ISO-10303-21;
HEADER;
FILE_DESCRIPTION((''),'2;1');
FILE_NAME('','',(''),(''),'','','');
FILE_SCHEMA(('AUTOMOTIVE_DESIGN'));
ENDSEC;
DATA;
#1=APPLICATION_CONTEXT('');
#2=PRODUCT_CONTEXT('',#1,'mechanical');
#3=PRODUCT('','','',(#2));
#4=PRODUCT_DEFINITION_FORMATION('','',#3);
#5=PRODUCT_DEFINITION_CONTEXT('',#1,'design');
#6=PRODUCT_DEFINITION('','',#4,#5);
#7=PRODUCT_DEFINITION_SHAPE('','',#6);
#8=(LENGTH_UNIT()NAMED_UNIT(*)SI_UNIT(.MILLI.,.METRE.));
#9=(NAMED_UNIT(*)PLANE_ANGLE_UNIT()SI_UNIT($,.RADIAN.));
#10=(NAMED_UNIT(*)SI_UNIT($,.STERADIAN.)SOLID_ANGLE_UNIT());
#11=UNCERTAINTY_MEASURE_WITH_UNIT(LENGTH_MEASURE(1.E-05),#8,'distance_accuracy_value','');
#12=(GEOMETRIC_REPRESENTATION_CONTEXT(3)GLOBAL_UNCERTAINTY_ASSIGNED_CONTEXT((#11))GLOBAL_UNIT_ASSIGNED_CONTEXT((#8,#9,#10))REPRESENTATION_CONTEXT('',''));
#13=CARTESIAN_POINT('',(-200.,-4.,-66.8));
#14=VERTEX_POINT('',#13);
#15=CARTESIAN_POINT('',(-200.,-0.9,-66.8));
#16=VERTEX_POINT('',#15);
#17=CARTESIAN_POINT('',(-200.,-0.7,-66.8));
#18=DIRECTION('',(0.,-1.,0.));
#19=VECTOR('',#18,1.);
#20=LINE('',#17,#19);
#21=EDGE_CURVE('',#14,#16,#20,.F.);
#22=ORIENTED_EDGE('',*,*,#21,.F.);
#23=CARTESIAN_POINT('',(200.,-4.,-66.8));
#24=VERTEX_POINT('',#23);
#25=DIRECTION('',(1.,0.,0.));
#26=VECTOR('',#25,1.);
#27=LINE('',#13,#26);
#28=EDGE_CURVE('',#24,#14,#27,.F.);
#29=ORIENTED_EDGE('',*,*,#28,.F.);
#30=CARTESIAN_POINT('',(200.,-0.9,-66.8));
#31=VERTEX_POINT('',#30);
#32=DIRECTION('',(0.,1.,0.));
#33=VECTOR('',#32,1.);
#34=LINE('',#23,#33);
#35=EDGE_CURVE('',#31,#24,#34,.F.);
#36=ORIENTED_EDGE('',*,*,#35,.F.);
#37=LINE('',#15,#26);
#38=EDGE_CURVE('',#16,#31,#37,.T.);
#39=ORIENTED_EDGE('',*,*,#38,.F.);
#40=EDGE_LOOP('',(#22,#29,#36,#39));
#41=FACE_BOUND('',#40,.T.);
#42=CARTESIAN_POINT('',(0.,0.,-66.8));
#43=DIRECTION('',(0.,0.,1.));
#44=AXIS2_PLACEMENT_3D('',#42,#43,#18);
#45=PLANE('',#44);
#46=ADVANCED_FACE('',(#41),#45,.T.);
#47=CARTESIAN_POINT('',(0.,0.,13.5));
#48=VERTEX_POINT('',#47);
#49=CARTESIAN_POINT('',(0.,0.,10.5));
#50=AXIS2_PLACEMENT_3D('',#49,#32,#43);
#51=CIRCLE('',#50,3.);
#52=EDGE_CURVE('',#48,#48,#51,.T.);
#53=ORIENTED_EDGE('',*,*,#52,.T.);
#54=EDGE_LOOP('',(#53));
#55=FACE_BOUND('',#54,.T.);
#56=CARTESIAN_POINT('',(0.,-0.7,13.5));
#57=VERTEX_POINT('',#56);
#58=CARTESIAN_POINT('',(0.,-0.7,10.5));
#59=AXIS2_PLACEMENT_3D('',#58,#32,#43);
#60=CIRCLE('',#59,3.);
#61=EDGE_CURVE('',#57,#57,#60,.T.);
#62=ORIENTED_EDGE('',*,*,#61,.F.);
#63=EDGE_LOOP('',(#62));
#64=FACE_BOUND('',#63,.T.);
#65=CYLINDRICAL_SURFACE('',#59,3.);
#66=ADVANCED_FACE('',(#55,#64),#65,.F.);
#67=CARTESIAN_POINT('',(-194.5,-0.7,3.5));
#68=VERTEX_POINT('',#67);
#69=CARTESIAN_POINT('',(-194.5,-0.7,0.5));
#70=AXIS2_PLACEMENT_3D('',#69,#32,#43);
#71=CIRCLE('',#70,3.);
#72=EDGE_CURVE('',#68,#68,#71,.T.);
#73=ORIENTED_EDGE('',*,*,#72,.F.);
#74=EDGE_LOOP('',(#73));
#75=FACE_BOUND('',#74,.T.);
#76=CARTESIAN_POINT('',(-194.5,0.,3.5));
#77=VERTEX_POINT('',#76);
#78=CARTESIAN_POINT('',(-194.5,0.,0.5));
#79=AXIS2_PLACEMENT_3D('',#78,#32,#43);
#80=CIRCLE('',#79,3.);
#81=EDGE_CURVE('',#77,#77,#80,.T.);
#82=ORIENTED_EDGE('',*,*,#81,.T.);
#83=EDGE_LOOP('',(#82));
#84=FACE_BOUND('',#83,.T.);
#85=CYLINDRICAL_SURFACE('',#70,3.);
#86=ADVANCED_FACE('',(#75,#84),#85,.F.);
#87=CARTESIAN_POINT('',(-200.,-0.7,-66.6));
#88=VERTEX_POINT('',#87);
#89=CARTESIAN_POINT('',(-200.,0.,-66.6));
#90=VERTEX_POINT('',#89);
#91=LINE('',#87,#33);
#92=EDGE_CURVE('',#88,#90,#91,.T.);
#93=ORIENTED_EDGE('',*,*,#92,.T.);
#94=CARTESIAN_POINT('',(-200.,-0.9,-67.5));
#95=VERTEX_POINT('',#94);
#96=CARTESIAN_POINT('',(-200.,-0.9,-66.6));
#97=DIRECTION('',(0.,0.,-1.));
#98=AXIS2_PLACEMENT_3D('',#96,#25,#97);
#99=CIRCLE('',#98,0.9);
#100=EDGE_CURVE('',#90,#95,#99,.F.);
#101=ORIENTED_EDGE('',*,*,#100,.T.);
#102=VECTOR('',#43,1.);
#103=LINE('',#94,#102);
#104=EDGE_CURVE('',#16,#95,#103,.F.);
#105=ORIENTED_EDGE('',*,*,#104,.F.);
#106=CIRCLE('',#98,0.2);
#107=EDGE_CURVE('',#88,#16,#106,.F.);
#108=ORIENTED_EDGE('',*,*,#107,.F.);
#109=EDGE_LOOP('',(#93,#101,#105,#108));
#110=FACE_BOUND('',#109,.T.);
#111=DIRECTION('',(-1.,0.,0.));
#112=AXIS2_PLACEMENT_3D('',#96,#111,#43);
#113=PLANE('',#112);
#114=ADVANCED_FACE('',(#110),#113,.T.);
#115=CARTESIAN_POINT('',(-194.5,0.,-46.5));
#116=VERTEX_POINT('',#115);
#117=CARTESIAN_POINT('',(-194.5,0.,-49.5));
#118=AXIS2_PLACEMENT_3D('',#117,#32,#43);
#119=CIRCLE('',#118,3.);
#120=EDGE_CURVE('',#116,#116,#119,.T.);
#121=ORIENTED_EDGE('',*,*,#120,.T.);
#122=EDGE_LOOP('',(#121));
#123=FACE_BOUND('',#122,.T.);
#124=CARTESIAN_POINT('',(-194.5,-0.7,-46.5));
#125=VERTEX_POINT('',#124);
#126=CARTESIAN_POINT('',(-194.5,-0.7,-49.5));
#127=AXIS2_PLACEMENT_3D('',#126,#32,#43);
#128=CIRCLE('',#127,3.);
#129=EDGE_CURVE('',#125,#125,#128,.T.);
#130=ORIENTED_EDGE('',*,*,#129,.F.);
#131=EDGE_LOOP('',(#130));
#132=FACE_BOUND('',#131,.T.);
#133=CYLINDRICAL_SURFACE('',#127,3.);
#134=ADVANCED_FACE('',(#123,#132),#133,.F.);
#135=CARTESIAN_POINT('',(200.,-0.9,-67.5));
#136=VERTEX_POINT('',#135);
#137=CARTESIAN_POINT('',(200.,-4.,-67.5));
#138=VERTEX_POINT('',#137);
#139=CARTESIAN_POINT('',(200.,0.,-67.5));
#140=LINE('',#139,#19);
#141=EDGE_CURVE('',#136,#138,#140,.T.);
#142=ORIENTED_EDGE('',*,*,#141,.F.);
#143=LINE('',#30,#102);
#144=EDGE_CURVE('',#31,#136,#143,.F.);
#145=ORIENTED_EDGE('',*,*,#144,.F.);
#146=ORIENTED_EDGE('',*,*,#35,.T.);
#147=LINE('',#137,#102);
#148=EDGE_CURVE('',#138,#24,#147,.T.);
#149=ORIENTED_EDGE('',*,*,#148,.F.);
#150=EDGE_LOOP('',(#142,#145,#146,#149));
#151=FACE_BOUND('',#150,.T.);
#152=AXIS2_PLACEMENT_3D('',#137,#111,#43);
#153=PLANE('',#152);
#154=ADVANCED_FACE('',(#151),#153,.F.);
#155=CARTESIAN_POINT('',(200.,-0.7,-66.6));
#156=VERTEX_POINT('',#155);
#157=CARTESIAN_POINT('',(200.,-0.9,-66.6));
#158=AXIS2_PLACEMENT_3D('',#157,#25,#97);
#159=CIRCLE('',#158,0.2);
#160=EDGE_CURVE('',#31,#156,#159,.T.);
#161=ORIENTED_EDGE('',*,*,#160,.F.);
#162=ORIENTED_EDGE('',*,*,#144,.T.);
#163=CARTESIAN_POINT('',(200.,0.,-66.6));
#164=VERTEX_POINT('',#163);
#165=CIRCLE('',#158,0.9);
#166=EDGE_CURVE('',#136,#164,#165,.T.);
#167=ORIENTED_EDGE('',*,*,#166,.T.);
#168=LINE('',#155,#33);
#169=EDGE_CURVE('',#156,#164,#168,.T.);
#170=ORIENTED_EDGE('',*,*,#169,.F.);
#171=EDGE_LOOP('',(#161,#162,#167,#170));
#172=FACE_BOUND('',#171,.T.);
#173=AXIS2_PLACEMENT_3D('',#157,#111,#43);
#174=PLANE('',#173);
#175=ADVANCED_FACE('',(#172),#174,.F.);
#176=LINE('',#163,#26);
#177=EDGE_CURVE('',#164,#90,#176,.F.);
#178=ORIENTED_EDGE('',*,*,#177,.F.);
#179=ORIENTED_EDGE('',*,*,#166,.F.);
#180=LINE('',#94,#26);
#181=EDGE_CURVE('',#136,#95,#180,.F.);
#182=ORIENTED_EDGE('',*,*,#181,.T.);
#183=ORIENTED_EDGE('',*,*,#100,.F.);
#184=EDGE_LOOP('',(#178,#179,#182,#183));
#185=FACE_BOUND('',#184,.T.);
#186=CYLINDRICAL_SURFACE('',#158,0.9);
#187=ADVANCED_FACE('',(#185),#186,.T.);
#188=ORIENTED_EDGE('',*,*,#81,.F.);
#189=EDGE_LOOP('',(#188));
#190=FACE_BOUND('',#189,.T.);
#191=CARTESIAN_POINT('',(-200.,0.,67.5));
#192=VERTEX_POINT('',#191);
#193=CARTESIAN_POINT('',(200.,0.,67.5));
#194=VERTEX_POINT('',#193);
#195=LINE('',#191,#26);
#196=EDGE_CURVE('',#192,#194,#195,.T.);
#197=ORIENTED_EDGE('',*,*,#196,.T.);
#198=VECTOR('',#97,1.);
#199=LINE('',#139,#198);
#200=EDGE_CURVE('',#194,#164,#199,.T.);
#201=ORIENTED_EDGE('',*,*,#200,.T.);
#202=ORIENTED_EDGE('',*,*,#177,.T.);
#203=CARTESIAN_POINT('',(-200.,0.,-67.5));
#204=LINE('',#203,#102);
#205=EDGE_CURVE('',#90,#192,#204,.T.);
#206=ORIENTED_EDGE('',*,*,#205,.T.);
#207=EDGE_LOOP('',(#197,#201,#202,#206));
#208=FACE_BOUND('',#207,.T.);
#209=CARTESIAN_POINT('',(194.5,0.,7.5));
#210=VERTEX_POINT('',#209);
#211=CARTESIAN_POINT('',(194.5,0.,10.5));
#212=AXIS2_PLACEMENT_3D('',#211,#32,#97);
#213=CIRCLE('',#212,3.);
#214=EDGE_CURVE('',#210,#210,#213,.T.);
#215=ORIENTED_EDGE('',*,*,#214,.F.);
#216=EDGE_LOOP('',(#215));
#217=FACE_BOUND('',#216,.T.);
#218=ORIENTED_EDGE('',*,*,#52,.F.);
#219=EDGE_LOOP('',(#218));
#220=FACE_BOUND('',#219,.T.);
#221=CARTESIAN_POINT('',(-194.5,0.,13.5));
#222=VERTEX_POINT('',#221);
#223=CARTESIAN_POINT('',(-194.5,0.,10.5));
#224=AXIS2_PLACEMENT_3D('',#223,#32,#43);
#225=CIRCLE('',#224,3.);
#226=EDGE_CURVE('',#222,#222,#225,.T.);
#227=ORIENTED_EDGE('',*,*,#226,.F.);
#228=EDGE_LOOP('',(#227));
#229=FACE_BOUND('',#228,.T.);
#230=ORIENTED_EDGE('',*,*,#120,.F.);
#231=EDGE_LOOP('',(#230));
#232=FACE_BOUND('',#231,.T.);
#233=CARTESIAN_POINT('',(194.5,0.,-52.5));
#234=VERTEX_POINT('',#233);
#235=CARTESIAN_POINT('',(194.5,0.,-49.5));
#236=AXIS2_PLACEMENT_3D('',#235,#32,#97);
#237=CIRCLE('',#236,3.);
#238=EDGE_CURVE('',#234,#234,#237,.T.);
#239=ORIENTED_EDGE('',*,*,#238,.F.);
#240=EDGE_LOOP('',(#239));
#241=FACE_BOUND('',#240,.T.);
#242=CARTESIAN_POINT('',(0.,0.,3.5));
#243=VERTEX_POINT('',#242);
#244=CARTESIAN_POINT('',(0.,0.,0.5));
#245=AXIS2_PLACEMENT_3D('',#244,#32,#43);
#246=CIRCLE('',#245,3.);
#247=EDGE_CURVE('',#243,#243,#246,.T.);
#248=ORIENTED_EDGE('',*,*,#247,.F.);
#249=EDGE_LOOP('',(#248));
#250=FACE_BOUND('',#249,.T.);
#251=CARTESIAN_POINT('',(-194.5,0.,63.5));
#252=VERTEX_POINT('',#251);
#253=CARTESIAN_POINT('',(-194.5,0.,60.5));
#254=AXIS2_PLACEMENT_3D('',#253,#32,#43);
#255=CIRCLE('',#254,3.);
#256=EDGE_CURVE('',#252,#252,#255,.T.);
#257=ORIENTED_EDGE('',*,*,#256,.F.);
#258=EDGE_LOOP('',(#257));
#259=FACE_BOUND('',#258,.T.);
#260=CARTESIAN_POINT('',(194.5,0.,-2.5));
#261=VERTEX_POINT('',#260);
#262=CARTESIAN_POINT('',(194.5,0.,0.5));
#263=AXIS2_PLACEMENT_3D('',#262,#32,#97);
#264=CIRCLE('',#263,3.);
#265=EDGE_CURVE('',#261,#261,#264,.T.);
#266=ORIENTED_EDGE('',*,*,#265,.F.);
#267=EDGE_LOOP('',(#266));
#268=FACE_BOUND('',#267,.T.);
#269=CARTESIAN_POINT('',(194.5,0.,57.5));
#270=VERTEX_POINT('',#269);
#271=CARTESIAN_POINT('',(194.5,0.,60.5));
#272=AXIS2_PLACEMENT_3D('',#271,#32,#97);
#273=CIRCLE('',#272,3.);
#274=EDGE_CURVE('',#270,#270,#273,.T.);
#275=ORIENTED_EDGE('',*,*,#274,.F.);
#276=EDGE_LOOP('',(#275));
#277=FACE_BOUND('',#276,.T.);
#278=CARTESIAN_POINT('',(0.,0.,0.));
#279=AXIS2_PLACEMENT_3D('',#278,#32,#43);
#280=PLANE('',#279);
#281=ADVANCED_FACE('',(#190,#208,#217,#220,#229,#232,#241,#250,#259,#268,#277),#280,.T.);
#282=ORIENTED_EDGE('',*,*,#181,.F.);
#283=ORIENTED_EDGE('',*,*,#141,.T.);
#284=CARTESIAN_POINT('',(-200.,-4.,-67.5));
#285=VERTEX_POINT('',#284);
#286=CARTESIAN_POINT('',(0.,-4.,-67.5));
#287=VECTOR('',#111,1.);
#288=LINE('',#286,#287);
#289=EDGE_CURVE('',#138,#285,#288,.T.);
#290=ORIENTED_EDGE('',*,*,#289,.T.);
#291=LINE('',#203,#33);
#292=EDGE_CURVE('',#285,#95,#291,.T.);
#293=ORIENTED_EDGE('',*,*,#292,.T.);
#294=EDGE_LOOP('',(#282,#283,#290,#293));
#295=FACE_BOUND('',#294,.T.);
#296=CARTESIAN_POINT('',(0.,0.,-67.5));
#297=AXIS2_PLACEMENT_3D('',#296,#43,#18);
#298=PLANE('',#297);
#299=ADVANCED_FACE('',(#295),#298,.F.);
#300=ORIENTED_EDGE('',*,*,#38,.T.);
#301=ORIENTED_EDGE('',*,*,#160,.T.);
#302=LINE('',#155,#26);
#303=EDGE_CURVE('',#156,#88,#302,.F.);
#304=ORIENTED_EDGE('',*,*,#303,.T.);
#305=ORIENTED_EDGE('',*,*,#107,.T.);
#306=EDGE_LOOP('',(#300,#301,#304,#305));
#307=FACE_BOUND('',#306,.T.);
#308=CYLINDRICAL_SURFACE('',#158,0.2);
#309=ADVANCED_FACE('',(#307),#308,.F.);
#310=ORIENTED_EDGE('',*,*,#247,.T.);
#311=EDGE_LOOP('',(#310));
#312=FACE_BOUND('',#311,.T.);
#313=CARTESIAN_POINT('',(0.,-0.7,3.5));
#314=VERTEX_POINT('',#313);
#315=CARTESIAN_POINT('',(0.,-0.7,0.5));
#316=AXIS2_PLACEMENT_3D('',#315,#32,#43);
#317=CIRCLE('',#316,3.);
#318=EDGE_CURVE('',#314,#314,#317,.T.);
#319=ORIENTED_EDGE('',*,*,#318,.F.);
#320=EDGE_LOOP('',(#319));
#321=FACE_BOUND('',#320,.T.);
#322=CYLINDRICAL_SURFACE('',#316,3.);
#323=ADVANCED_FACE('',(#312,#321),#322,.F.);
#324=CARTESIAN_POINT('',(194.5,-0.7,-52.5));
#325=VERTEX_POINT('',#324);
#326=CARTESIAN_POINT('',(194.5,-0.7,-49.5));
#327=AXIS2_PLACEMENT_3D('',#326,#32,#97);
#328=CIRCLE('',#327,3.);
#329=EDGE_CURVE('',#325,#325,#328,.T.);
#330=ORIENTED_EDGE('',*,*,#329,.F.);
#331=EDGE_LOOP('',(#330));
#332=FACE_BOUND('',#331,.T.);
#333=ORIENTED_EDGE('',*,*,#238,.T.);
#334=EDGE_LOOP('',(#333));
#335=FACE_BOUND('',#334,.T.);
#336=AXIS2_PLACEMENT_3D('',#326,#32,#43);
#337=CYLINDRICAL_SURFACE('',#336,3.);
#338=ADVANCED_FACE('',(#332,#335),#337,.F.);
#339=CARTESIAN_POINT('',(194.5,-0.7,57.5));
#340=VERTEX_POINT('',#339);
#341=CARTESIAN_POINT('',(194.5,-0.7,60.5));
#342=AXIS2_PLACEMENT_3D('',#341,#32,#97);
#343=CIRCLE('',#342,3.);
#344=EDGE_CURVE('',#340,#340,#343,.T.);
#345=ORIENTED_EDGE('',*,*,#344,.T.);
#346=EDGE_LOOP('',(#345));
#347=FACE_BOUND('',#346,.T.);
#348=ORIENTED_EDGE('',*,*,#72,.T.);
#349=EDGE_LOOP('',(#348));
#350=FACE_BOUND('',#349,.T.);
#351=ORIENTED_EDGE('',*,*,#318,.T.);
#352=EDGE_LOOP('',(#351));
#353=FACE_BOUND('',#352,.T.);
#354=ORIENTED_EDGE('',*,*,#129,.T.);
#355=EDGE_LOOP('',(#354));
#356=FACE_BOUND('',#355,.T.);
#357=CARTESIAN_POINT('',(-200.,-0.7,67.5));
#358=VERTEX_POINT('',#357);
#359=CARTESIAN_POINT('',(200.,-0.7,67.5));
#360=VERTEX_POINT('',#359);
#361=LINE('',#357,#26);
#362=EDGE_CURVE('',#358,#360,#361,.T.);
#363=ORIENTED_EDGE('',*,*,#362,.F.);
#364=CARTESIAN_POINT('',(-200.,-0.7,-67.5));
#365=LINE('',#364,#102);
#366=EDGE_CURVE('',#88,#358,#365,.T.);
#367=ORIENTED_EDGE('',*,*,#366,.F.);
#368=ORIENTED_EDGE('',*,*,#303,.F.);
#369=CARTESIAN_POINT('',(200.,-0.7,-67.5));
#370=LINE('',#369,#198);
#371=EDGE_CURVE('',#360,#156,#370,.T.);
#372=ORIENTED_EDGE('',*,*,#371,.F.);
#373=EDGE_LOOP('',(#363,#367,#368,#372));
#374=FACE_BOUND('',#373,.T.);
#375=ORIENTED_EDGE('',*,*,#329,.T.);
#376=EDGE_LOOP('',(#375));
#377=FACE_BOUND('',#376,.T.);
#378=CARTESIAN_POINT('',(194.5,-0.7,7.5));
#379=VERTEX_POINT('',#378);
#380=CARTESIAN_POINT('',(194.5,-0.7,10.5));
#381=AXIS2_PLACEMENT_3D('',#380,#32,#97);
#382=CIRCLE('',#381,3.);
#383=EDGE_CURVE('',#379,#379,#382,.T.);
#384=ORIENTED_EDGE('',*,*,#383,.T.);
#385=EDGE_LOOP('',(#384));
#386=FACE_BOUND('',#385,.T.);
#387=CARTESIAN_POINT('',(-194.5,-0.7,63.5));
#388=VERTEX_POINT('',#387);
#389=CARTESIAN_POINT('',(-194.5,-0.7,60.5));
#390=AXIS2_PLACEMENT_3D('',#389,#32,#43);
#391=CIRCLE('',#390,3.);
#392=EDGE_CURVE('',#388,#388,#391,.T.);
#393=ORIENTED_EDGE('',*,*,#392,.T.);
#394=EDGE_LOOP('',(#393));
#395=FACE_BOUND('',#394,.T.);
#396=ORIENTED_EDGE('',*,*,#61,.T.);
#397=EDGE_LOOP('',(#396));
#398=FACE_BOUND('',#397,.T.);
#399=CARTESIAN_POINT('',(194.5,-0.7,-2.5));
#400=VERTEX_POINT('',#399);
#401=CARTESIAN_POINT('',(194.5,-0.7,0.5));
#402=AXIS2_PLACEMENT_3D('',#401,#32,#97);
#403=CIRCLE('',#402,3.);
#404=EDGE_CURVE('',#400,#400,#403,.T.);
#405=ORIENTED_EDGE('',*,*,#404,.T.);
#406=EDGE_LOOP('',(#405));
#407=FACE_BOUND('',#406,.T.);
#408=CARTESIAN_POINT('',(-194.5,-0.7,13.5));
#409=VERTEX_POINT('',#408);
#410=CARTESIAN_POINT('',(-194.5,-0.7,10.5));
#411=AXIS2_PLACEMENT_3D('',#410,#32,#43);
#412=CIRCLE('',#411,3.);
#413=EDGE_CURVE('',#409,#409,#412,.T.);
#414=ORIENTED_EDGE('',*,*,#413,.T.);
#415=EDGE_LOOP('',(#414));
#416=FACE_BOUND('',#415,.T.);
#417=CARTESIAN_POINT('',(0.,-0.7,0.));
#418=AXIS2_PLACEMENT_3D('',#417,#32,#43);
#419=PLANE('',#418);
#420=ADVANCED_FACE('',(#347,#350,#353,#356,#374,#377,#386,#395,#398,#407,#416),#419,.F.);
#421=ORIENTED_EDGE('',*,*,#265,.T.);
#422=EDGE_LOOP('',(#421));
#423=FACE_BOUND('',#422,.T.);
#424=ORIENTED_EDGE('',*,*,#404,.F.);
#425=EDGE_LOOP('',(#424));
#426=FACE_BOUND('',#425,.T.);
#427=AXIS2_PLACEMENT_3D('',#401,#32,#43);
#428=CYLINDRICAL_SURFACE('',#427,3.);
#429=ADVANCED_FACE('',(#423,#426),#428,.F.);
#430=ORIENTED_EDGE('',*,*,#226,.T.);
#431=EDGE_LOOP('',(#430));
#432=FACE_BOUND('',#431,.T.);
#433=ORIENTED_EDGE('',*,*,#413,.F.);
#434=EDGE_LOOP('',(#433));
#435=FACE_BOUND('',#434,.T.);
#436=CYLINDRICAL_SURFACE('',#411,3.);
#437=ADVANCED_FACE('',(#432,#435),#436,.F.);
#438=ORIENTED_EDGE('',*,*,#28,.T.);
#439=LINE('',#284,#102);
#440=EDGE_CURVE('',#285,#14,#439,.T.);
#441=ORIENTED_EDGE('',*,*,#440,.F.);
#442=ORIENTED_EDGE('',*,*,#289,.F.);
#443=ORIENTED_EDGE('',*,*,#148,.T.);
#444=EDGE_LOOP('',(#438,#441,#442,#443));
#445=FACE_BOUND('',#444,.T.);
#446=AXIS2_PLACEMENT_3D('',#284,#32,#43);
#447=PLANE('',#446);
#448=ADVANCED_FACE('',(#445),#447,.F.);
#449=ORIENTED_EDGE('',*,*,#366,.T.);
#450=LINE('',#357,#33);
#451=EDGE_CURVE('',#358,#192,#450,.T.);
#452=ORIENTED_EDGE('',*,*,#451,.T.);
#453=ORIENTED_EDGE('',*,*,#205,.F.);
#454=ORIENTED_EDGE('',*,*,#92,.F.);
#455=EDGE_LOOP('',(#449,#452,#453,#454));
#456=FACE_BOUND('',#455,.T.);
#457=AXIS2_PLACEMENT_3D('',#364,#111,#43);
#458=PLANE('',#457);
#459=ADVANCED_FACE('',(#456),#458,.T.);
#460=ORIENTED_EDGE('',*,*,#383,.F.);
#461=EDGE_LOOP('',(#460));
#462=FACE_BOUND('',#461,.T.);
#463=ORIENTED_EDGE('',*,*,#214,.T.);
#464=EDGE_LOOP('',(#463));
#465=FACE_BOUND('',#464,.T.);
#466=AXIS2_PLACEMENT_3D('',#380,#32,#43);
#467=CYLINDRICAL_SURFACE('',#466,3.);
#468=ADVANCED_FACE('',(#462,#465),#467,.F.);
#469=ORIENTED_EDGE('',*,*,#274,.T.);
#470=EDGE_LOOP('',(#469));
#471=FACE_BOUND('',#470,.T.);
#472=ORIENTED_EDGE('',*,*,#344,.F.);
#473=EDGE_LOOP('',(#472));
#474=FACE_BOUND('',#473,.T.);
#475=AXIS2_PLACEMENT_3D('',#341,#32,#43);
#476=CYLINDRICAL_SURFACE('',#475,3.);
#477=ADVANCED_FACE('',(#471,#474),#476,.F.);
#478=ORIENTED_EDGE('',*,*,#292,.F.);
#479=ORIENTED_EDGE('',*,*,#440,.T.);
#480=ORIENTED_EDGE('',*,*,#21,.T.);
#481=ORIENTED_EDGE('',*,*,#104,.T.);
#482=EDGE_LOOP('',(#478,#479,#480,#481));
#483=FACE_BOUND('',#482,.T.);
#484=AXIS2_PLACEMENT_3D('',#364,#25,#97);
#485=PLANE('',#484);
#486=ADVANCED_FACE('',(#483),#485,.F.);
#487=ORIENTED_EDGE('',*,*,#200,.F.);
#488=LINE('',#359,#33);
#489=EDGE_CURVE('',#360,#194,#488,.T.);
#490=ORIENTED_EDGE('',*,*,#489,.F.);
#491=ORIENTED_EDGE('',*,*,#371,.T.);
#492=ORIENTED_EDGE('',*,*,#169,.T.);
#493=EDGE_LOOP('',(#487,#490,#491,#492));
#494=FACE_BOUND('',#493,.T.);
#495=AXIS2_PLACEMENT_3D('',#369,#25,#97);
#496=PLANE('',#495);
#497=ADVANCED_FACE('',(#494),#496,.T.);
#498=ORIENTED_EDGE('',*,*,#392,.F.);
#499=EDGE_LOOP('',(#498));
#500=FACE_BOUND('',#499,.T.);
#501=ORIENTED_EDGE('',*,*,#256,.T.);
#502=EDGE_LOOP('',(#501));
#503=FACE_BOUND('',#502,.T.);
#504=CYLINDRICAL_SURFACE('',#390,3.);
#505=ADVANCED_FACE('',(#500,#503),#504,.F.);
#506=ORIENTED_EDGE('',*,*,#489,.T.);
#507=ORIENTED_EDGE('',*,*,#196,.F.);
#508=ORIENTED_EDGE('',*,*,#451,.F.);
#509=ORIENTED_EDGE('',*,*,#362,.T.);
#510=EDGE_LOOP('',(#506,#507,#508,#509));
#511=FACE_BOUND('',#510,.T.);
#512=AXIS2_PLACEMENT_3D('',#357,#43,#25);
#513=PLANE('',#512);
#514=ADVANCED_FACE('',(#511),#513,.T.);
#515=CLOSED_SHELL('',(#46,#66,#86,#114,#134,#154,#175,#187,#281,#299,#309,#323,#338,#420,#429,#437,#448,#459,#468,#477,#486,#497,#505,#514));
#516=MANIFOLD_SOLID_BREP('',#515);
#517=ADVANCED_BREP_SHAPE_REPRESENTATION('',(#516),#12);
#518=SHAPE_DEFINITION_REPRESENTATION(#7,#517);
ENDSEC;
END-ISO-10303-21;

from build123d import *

# Parameters (mm, degrees)
SKETCH_1_W                       = 400
SKETCH_1_H                       = 135
SKETCH_1_R                       = 3
SM_BASE_FLANGE_1_DEPTH           = 0.7
SM_EDGE_FLANGE_1_STRIP_W         = 3.2
SM_EDGE_FLANGE_1_STRIP_H         = 0.7
SM_EDGE_FLANGE_1_STRIP_CUT_DEPTH = 400
SM_EDGE_FLANGE_1_DEPTH           = 400


# Sheet-metal steps are written as plain solids
with BuildPart() as part:
    # Sketch 1 → 基体-法兰1 (new body)
    with BuildSketch(Plane(origin=(0, 0, 0), x_dir=(1, 0, 0), z_dir=(0, 1, 0))):
        Rectangle(SKETCH_1_W, SKETCH_1_H)
        with Locations(Location((-194.5, -60.5, 0), (0, 0, 270))):
            Circle(SKETCH_1_R, mode=Mode.SUBTRACT)
        with Locations(Location((-194.5, -10.5, 0), (0, 0, 270))):
            Circle(SKETCH_1_R, mode=Mode.SUBTRACT)
        with Locations(Location((-194.5, -0.5, 0), (0, 0, 270))):
            Circle(SKETCH_1_R, mode=Mode.SUBTRACT)
        with Locations(Location((-194.5, 49.5, 0), (0, 0, 270))):
            Circle(SKETCH_1_R, mode=Mode.SUBTRACT)
        with Locations(Location((0, -10.5, 0), (0, 0, 270))):
            Circle(SKETCH_1_R, mode=Mode.SUBTRACT)
        with Locations(Location((0, -0.5, 0), (0, 0, 270))):
            Circle(SKETCH_1_R, mode=Mode.SUBTRACT)
        with Locations(Location((194.5, -60.5, 0), (0, 0, 90))):
            Circle(SKETCH_1_R, mode=Mode.SUBTRACT)
        with Locations(Location((194.5, -10.5, 0), (0, 0, 90))):
            Circle(SKETCH_1_R, mode=Mode.SUBTRACT)
        with Locations(Location((194.5, -0.5, 0), (0, 0, 90))):
            Circle(SKETCH_1_R, mode=Mode.SUBTRACT)
        with Locations(Location((194.5, 49.5, 0), (0, 0, 90))):
            Circle(SKETCH_1_R, mode=Mode.SUBTRACT)
    extrude(amount=-SM_BASE_FLANGE_1_DEPTH)

    # 边线-法兰1 strip (across the edge) → 边线-法兰1 strip cut (cut)
    with BuildSketch(Plane(origin=(-200, -0.7, -67.5), x_dir=(0, 0, 1), z_dir=(1, 0, 0))):
        with Locations((-0.7, -0.35)):
            Rectangle(SM_EDGE_FLANGE_1_STRIP_W, SM_EDGE_FLANGE_1_STRIP_H)
    extrude(amount=SM_EDGE_FLANGE_1_STRIP_CUT_DEPTH, mode=Mode.SUBTRACT)

    # 边线-法兰1 section (across the edge) → 边线-法兰1 (add)
    with BuildSketch(Plane(origin=(-200, -0.7, -67.5), x_dir=(0, 0, 1), z_dir=(1, 0, 0))):
        with BuildLine():
            Line((0, 0.2), (0, 3.3))
            Line((0, 3.3), (0.7, 3.3))
            Line((0.7, 3.3), (0.7, 0.2))
            ThreePointArc((0.7, 0.2), (0.758578644, 0.058578644), (0.9, 0))
            Line((0.9, 0), (0.9, -0.7))
            ThreePointArc((0.9, -0.7), (0.263603897, -0.436396103), (0, 0.2))
        make_face()
    extrude(amount=SM_EDGE_FLANGE_1_DEPTH)


solid = part.part
